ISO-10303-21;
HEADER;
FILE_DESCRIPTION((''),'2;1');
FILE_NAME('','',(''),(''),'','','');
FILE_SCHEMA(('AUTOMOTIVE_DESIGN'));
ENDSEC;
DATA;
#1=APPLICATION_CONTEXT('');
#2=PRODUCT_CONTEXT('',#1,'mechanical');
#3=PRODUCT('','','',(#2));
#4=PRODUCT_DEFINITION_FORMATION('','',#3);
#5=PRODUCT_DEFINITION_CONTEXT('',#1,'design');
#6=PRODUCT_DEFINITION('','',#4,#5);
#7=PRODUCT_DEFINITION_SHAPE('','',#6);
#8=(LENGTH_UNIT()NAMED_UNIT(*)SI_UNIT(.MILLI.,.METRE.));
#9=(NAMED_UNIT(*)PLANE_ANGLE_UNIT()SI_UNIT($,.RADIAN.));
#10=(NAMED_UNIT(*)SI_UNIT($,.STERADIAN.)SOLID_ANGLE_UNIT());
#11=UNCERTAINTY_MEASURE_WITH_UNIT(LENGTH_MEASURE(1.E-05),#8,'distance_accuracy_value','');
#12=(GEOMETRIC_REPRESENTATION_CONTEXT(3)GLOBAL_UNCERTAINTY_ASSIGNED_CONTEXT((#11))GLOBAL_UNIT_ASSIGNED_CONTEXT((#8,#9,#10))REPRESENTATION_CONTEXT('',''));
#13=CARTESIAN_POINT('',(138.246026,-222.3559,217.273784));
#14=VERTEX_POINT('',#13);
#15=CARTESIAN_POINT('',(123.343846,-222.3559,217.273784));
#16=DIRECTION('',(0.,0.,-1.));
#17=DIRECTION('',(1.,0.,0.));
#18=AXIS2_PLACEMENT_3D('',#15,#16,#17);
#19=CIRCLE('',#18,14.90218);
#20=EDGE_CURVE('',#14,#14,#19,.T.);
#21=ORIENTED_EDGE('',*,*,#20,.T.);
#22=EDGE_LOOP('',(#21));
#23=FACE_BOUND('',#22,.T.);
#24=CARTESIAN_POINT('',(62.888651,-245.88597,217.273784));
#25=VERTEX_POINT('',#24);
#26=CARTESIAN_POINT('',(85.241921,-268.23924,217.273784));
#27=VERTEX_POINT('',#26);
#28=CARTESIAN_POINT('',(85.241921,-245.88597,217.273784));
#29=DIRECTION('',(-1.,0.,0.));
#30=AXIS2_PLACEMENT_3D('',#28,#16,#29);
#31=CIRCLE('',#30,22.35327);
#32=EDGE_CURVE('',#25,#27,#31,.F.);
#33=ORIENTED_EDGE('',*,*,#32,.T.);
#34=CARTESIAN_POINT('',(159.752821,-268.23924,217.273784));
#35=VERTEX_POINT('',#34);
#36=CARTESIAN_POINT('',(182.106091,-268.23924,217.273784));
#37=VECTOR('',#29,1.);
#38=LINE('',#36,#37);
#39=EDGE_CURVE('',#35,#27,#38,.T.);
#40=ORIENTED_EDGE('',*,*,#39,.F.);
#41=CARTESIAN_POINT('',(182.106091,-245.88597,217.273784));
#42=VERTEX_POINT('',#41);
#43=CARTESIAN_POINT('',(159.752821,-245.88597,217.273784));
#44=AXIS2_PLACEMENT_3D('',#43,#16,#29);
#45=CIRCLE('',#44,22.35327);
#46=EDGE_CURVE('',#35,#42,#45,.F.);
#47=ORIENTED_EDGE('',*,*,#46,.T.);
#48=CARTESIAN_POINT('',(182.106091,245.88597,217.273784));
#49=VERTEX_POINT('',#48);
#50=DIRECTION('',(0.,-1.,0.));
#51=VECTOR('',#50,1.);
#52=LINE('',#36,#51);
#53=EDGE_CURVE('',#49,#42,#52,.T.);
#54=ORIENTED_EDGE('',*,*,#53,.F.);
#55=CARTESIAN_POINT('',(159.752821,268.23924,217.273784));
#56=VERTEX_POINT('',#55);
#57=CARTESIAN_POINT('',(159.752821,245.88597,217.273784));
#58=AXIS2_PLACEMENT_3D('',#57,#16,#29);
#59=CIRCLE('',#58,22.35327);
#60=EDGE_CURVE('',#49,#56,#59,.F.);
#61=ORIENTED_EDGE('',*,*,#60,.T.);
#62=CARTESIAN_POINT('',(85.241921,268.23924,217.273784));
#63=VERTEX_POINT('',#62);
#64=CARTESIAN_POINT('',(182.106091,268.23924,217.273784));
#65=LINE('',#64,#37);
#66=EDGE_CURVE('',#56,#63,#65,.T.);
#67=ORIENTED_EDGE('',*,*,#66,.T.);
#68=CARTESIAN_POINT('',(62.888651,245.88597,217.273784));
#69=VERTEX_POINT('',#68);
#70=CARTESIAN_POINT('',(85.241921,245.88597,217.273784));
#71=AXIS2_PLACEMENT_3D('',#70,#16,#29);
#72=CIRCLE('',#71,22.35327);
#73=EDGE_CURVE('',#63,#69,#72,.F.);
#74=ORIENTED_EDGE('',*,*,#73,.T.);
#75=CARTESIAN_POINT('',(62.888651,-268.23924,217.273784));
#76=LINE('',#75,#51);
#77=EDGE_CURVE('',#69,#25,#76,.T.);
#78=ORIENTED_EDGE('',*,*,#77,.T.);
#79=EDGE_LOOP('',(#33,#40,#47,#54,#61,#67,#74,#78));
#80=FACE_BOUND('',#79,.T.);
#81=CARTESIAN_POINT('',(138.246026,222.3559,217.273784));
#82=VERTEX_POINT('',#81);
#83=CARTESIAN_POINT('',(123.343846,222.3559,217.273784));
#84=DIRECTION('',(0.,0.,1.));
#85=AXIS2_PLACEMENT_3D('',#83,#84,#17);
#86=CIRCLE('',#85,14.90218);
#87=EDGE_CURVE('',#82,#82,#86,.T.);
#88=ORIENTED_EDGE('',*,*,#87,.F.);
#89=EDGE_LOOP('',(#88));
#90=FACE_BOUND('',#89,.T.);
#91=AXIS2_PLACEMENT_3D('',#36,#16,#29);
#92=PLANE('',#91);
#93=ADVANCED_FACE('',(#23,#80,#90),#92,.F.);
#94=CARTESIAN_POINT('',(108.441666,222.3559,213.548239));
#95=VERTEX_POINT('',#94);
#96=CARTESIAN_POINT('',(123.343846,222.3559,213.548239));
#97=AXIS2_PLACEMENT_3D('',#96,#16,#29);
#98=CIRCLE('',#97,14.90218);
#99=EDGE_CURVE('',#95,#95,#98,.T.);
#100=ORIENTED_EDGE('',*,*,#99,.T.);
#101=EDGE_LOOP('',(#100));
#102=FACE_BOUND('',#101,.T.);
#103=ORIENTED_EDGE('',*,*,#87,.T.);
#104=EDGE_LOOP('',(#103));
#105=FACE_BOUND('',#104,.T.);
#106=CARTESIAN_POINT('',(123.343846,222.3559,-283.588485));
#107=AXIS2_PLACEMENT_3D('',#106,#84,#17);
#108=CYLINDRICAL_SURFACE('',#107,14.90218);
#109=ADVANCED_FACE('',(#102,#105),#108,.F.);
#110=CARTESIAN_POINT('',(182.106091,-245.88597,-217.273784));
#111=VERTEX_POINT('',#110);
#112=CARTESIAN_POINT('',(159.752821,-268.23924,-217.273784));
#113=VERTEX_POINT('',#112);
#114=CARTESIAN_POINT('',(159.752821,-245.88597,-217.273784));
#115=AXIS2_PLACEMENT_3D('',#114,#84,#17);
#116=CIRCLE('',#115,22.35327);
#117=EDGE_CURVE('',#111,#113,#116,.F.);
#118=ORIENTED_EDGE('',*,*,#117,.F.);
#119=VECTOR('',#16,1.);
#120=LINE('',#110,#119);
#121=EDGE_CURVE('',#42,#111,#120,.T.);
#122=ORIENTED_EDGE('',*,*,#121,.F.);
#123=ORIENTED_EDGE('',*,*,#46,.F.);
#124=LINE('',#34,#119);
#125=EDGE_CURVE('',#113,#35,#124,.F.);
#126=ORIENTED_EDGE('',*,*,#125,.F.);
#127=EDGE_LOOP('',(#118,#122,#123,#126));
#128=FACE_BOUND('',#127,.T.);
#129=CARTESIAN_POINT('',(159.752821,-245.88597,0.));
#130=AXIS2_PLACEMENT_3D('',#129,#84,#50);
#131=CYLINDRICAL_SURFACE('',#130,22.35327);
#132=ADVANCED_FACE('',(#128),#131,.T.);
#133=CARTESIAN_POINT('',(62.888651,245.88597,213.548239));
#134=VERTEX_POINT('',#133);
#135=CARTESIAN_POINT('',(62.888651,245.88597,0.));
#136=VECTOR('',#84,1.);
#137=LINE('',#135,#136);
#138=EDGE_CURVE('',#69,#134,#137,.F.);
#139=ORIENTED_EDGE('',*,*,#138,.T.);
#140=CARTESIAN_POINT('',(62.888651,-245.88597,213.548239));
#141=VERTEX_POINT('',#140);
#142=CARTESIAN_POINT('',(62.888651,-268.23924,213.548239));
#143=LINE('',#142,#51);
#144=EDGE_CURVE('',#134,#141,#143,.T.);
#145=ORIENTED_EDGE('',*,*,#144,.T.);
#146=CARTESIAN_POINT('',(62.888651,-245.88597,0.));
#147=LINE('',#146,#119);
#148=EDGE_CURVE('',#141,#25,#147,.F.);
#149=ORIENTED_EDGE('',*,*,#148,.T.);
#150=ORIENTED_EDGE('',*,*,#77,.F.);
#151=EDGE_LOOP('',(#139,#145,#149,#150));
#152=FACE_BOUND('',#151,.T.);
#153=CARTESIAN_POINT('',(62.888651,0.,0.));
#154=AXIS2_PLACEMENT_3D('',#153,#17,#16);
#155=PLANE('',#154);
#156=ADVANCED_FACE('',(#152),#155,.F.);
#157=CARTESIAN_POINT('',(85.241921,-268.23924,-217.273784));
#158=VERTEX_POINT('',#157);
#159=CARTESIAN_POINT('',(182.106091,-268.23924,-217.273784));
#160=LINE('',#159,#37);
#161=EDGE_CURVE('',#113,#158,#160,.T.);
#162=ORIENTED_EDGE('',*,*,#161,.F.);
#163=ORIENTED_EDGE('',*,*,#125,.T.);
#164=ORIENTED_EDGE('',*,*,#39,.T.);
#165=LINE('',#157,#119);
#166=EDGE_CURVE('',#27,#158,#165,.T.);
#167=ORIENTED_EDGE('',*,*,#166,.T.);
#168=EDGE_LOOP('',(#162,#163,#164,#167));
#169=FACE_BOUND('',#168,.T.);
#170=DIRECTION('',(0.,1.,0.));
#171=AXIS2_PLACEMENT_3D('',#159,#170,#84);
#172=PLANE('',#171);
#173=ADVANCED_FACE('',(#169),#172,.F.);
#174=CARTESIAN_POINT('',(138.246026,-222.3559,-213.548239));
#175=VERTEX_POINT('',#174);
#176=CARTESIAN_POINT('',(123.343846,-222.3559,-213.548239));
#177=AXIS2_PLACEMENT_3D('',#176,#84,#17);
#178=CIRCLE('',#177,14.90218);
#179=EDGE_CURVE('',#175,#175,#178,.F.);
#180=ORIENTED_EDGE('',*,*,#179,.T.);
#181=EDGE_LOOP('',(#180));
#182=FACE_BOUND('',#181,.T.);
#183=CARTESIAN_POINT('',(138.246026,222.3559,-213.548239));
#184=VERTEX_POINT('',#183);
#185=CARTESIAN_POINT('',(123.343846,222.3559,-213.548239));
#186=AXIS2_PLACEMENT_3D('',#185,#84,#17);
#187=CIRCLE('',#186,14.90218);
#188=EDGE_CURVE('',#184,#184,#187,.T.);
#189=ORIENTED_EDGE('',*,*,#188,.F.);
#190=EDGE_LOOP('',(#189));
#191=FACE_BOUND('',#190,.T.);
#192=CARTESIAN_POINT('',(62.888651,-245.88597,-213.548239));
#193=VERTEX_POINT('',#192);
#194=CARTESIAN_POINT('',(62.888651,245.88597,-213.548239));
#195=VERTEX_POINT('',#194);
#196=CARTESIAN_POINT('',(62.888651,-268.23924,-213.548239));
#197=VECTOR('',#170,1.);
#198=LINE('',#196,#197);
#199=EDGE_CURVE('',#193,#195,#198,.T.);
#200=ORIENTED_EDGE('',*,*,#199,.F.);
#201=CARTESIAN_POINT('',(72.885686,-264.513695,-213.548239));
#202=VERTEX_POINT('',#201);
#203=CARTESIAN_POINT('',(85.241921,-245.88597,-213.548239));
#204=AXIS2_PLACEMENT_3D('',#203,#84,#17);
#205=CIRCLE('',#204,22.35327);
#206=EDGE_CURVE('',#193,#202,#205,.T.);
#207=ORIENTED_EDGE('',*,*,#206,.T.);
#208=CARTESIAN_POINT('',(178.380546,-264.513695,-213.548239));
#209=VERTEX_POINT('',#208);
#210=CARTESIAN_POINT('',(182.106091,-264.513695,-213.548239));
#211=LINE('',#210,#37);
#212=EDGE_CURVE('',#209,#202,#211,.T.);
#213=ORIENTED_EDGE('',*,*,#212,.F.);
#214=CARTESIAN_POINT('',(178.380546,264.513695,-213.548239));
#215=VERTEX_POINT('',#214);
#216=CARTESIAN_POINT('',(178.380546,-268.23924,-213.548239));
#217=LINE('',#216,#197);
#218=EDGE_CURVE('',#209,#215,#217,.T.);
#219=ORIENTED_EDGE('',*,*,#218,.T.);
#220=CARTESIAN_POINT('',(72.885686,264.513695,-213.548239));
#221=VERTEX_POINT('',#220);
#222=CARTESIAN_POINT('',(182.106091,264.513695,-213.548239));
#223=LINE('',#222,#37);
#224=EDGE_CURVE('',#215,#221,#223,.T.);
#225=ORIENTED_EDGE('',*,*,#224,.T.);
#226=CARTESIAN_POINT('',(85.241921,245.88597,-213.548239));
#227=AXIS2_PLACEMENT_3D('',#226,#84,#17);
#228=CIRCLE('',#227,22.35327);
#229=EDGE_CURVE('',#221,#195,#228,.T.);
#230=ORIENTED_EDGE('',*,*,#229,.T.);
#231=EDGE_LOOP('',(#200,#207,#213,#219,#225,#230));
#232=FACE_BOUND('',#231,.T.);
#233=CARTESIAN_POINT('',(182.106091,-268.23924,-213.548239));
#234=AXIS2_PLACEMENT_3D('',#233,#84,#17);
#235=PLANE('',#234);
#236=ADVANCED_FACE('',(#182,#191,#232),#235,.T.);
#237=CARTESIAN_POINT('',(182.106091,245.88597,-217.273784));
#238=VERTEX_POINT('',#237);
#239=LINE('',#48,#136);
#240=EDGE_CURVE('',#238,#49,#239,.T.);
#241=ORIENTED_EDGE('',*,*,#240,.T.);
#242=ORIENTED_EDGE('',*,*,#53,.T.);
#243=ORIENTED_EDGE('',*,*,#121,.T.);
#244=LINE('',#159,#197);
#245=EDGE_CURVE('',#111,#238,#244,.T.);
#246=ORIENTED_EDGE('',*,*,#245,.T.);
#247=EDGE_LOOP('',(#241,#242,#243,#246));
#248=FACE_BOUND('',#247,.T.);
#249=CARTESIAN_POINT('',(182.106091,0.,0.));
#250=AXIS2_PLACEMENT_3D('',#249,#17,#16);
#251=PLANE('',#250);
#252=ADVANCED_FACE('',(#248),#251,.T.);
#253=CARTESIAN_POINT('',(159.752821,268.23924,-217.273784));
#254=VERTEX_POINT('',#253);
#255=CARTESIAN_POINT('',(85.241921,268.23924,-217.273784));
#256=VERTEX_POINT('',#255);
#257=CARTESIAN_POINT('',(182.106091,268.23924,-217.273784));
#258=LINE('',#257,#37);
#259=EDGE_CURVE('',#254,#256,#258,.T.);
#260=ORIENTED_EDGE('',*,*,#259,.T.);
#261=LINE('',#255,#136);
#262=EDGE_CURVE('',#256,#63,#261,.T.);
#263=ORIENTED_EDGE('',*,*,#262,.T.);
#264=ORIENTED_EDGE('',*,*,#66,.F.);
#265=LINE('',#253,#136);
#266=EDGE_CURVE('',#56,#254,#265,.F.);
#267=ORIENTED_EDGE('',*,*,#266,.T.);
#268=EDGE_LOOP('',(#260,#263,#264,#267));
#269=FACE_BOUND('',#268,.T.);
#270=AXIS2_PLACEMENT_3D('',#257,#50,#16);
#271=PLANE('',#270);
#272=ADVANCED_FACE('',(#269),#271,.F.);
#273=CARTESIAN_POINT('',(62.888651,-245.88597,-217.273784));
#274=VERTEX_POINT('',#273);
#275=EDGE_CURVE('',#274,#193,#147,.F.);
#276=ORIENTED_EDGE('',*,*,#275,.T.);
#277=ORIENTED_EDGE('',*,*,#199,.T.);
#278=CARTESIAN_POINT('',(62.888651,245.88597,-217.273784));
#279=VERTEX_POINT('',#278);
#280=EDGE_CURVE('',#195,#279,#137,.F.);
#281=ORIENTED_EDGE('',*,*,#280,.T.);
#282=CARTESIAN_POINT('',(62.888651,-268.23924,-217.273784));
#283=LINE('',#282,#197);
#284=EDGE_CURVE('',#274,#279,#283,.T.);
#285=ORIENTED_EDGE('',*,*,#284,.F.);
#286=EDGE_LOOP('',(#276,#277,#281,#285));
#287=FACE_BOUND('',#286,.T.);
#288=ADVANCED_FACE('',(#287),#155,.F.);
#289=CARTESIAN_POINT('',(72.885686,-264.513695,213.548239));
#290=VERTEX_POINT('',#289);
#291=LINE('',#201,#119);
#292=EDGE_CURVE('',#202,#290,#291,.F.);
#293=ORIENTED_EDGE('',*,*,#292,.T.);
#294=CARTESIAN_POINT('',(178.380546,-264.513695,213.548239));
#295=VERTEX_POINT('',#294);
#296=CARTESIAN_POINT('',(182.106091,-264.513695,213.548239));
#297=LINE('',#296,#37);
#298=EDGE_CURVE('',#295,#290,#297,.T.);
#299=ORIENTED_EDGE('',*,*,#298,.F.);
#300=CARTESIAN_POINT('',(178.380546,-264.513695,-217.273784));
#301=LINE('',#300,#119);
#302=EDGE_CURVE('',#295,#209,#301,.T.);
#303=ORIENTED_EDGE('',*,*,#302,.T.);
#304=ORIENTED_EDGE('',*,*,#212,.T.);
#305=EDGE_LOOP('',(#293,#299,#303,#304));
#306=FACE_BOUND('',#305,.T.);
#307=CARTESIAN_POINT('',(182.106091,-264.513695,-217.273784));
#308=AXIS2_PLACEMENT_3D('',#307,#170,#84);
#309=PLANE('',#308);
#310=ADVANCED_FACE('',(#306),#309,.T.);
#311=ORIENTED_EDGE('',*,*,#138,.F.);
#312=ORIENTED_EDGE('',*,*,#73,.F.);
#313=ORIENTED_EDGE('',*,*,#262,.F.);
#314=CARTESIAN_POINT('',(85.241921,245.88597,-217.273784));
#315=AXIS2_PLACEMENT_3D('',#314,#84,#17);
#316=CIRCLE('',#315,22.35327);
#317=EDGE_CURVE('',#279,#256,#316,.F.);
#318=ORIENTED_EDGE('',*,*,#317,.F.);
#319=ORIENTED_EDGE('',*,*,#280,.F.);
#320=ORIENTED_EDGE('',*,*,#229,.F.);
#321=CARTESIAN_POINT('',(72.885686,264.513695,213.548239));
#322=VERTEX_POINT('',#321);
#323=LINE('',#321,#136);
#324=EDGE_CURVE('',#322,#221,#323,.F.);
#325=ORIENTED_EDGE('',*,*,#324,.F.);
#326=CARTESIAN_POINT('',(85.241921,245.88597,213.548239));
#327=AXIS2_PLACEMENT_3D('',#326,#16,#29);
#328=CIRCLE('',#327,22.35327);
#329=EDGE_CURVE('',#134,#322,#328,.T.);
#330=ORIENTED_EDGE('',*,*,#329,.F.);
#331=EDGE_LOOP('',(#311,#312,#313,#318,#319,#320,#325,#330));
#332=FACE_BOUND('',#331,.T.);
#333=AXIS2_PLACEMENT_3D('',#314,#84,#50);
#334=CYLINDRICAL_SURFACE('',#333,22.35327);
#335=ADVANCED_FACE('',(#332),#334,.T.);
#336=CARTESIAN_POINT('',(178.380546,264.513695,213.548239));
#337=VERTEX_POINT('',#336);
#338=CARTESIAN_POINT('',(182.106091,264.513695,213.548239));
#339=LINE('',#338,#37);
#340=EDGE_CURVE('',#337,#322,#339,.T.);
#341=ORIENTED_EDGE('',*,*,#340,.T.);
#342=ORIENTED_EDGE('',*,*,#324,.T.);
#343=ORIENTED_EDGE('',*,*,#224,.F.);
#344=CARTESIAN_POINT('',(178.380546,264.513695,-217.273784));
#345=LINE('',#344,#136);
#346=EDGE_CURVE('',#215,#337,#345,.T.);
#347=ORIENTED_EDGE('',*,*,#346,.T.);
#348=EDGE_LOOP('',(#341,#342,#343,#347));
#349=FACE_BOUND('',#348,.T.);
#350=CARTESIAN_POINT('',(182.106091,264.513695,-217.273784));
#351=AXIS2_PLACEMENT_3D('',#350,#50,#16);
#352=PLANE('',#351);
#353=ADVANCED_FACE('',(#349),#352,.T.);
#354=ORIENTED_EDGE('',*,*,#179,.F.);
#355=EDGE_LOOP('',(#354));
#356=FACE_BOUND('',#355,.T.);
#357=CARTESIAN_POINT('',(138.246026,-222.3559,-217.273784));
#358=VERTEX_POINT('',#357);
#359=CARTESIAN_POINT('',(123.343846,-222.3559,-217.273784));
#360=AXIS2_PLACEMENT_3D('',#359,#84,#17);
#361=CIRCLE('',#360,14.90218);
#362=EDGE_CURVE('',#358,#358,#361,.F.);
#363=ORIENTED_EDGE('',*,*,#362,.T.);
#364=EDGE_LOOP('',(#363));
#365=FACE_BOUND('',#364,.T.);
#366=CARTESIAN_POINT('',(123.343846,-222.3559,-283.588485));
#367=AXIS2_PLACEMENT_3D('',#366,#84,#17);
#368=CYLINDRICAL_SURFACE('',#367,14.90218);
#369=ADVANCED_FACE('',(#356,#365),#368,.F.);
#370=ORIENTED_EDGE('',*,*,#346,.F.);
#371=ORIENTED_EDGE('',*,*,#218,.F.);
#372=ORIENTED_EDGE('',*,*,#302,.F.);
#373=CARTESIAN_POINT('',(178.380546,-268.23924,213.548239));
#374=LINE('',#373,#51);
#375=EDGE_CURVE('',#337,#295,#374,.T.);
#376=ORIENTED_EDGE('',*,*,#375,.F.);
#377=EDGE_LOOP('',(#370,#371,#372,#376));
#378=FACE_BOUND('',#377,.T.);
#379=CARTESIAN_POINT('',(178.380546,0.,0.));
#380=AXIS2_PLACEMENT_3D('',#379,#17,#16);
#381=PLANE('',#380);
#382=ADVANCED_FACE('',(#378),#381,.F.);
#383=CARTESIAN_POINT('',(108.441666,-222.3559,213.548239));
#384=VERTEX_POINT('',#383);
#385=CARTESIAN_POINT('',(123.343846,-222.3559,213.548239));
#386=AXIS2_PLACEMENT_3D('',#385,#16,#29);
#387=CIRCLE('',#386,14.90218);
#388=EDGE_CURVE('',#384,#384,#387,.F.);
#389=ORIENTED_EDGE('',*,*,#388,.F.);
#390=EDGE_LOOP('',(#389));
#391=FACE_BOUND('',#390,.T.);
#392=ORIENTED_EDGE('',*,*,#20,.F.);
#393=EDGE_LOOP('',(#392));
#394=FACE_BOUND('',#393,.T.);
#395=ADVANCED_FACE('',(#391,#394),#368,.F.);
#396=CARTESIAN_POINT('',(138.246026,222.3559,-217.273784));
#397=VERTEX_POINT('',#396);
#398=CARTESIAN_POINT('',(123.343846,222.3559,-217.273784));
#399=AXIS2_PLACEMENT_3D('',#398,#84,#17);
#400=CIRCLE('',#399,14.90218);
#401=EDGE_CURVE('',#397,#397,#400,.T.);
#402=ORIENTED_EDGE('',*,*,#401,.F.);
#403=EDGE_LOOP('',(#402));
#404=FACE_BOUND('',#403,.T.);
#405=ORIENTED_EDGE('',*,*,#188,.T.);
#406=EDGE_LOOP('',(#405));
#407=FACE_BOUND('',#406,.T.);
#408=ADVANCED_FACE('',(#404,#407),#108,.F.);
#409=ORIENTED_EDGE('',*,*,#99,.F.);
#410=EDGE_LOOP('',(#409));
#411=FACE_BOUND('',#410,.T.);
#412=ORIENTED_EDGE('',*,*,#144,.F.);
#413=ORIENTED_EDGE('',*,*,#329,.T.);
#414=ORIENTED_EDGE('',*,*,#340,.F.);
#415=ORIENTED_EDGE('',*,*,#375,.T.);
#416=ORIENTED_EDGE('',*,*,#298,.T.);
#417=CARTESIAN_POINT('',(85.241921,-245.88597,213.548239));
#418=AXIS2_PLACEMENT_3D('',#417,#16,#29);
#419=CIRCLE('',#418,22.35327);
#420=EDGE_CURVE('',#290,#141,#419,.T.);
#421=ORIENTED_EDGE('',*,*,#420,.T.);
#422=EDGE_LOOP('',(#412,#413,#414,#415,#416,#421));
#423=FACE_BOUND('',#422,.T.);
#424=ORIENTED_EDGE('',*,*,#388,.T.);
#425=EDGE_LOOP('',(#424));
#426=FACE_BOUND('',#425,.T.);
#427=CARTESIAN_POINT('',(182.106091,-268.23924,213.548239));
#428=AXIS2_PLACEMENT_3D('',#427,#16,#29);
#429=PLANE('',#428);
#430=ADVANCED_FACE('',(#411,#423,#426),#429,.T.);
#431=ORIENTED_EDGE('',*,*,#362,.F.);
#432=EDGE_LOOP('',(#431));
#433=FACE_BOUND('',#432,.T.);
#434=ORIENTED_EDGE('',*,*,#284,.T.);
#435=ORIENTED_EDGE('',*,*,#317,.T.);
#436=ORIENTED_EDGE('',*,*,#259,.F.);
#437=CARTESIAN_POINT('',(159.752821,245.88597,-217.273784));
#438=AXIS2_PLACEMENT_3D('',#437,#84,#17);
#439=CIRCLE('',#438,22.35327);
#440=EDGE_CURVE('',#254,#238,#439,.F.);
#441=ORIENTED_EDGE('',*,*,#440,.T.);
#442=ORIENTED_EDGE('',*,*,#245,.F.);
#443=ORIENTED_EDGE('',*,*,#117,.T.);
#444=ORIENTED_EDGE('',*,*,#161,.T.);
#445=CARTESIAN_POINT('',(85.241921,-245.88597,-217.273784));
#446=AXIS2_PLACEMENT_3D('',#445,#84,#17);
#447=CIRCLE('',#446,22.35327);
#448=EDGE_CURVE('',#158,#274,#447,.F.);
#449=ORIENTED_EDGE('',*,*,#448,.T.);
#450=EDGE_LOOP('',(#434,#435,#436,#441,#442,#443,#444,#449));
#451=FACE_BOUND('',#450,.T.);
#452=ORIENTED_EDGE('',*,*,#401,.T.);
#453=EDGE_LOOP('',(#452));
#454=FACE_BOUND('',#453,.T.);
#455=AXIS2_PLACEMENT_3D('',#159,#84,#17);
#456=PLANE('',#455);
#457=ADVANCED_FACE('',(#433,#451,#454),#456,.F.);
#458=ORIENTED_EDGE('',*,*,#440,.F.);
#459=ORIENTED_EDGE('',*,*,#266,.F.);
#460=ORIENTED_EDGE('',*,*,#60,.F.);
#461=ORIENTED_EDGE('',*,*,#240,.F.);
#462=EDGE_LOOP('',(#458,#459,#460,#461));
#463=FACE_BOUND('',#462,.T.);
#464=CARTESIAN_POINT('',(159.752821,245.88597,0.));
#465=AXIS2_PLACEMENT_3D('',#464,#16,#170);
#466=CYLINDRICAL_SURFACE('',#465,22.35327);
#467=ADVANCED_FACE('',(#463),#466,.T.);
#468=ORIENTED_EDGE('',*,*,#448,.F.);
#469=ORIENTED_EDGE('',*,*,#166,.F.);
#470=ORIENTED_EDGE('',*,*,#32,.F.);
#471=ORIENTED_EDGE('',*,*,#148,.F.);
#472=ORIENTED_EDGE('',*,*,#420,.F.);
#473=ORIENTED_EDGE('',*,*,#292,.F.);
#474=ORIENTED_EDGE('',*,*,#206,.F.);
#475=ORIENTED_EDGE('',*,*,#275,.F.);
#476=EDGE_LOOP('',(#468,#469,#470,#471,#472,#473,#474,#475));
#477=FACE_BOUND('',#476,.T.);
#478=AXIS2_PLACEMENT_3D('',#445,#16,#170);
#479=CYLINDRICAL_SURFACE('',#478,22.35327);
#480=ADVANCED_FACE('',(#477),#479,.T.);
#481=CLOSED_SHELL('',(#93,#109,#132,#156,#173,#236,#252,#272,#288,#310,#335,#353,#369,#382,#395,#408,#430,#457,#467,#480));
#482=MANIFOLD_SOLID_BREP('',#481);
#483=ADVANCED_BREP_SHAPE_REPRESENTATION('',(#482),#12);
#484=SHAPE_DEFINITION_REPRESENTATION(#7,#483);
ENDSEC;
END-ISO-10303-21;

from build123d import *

# Parameters (mm, degrees)
SKETCH1_W           = 740.664
SKETCH1_H           = 914.4
BOSS_EXTRUDE1_DEPTH = 203.2
SHELL1_T            = -6.35
SKETCH4_R           = 25.4
CUT_EXTRUDE1_DEPTH  = 853.694
FILLET1_R           = 38.1
SCALE1_SCALE        = 0.5867


with BuildPart() as part:
    # Sketch1 → Boss-Extrude1 (new body)
    with BuildSketch(Plane(origin=(0, 0, 0), x_dir=(0, 0, -1), z_dir=(1, 0, 0))):
        Rectangle(SKETCH1_W, SKETCH1_H)
    extrude(amount=BOSS_EXTRUDE1_DEPTH)

    # Shell1
    shell1_openings = [part.faces().sort_by_distance(p)[0] for p in [
        (0, 0, 0),
    ]]
    offset(amount=SHELL1_T, openings=shell1_openings, kind=Kind.INTERSECTION)

    # Sketch4 → Cut-Extrude1 (cut)
    with BuildSketch(Plane.XY.offset(370.332)):
        with Locations((103.042772695, 378.994204807)):
            Circle(SKETCH4_R)
    cut_extrude1 = extrude(amount=-CUT_EXTRUDE1_DEPTH, mode=Mode.SUBTRACT)

    # Mirror1: Cut-Extrude1 across plane
    add(cut_extrude1.mirror(Plane.ZX), mode=Mode.SUBTRACT)

    # Fillet1
    fillet1_edges = [part.edges().sort_by_distance(p)[0] for p in [
        (203.2, -457.2, 0),
    ]]
    fillet(fillet1_edges, radius=FILLET1_R)
    fillet1_2_edges = [part.edges().sort_by_distance(p)[0] for p in [
        (203.2, 457.2, 0),
    ]]
    fillet(fillet1_2_edges, radius=FILLET1_R)
    # the kernel refuses this fillet: 38.1 mm, written as the material it takes off along each edge
    with BuildSketch(Plane(origin=(0, -457.2, -465.582), x_dir=(1, 0, 0), z_dir=(0, 0, 1))) as fillet1_3_piece_1:
        with BuildLine():
            CenterArc((FILLET1_R, FILLET1_R), FILLET1_R, 180, 90)
            Line((0, FILLET1_R), (-FILLET1_R * 0.02, FILLET1_R))
            Line((-FILLET1_R * 0.02, FILLET1_R), (-FILLET1_R * 0.02, -FILLET1_R * 0.02))
            Line((-FILLET1_R * 0.02, -FILLET1_R * 0.02), (FILLET1_R, -FILLET1_R * 0.02))
            Line((FILLET1_R, -FILLET1_R * 0.02), (FILLET1_R, 0))
        make_face()
    extrude(amount=931.164, mode=Mode.SUBTRACT)
    # the kernel refuses this fillet: 38.1 mm, written as the material it takes off along each edge
    with BuildSketch(Plane(origin=(0, 457.2, 465.582), x_dir=(1, 0, 0), z_dir=(0, 0, -1))) as fillet1_4_piece_1:
        with BuildLine():
            CenterArc((FILLET1_R, FILLET1_R), FILLET1_R, 180, 90)
            Line((0, FILLET1_R), (-FILLET1_R * 0.02, FILLET1_R))
            Line((-FILLET1_R * 0.02, FILLET1_R), (-FILLET1_R * 0.02, -FILLET1_R * 0.02))
            Line((-FILLET1_R * 0.02, -FILLET1_R * 0.02), (FILLET1_R, -FILLET1_R * 0.02))
            Line((FILLET1_R, -FILLET1_R * 0.02), (FILLET1_R, 0))
        make_face()
    extrude(amount=931.164, mode=Mode.SUBTRACT)


with BuildPart() as part_1:
    # Scale1: scaled about (152.162233958, 0, 0)
    add(part.part.scale(SCALE1_SCALE).moved(Location((62.888651295, 0, 0))))


solid = part_1.part
